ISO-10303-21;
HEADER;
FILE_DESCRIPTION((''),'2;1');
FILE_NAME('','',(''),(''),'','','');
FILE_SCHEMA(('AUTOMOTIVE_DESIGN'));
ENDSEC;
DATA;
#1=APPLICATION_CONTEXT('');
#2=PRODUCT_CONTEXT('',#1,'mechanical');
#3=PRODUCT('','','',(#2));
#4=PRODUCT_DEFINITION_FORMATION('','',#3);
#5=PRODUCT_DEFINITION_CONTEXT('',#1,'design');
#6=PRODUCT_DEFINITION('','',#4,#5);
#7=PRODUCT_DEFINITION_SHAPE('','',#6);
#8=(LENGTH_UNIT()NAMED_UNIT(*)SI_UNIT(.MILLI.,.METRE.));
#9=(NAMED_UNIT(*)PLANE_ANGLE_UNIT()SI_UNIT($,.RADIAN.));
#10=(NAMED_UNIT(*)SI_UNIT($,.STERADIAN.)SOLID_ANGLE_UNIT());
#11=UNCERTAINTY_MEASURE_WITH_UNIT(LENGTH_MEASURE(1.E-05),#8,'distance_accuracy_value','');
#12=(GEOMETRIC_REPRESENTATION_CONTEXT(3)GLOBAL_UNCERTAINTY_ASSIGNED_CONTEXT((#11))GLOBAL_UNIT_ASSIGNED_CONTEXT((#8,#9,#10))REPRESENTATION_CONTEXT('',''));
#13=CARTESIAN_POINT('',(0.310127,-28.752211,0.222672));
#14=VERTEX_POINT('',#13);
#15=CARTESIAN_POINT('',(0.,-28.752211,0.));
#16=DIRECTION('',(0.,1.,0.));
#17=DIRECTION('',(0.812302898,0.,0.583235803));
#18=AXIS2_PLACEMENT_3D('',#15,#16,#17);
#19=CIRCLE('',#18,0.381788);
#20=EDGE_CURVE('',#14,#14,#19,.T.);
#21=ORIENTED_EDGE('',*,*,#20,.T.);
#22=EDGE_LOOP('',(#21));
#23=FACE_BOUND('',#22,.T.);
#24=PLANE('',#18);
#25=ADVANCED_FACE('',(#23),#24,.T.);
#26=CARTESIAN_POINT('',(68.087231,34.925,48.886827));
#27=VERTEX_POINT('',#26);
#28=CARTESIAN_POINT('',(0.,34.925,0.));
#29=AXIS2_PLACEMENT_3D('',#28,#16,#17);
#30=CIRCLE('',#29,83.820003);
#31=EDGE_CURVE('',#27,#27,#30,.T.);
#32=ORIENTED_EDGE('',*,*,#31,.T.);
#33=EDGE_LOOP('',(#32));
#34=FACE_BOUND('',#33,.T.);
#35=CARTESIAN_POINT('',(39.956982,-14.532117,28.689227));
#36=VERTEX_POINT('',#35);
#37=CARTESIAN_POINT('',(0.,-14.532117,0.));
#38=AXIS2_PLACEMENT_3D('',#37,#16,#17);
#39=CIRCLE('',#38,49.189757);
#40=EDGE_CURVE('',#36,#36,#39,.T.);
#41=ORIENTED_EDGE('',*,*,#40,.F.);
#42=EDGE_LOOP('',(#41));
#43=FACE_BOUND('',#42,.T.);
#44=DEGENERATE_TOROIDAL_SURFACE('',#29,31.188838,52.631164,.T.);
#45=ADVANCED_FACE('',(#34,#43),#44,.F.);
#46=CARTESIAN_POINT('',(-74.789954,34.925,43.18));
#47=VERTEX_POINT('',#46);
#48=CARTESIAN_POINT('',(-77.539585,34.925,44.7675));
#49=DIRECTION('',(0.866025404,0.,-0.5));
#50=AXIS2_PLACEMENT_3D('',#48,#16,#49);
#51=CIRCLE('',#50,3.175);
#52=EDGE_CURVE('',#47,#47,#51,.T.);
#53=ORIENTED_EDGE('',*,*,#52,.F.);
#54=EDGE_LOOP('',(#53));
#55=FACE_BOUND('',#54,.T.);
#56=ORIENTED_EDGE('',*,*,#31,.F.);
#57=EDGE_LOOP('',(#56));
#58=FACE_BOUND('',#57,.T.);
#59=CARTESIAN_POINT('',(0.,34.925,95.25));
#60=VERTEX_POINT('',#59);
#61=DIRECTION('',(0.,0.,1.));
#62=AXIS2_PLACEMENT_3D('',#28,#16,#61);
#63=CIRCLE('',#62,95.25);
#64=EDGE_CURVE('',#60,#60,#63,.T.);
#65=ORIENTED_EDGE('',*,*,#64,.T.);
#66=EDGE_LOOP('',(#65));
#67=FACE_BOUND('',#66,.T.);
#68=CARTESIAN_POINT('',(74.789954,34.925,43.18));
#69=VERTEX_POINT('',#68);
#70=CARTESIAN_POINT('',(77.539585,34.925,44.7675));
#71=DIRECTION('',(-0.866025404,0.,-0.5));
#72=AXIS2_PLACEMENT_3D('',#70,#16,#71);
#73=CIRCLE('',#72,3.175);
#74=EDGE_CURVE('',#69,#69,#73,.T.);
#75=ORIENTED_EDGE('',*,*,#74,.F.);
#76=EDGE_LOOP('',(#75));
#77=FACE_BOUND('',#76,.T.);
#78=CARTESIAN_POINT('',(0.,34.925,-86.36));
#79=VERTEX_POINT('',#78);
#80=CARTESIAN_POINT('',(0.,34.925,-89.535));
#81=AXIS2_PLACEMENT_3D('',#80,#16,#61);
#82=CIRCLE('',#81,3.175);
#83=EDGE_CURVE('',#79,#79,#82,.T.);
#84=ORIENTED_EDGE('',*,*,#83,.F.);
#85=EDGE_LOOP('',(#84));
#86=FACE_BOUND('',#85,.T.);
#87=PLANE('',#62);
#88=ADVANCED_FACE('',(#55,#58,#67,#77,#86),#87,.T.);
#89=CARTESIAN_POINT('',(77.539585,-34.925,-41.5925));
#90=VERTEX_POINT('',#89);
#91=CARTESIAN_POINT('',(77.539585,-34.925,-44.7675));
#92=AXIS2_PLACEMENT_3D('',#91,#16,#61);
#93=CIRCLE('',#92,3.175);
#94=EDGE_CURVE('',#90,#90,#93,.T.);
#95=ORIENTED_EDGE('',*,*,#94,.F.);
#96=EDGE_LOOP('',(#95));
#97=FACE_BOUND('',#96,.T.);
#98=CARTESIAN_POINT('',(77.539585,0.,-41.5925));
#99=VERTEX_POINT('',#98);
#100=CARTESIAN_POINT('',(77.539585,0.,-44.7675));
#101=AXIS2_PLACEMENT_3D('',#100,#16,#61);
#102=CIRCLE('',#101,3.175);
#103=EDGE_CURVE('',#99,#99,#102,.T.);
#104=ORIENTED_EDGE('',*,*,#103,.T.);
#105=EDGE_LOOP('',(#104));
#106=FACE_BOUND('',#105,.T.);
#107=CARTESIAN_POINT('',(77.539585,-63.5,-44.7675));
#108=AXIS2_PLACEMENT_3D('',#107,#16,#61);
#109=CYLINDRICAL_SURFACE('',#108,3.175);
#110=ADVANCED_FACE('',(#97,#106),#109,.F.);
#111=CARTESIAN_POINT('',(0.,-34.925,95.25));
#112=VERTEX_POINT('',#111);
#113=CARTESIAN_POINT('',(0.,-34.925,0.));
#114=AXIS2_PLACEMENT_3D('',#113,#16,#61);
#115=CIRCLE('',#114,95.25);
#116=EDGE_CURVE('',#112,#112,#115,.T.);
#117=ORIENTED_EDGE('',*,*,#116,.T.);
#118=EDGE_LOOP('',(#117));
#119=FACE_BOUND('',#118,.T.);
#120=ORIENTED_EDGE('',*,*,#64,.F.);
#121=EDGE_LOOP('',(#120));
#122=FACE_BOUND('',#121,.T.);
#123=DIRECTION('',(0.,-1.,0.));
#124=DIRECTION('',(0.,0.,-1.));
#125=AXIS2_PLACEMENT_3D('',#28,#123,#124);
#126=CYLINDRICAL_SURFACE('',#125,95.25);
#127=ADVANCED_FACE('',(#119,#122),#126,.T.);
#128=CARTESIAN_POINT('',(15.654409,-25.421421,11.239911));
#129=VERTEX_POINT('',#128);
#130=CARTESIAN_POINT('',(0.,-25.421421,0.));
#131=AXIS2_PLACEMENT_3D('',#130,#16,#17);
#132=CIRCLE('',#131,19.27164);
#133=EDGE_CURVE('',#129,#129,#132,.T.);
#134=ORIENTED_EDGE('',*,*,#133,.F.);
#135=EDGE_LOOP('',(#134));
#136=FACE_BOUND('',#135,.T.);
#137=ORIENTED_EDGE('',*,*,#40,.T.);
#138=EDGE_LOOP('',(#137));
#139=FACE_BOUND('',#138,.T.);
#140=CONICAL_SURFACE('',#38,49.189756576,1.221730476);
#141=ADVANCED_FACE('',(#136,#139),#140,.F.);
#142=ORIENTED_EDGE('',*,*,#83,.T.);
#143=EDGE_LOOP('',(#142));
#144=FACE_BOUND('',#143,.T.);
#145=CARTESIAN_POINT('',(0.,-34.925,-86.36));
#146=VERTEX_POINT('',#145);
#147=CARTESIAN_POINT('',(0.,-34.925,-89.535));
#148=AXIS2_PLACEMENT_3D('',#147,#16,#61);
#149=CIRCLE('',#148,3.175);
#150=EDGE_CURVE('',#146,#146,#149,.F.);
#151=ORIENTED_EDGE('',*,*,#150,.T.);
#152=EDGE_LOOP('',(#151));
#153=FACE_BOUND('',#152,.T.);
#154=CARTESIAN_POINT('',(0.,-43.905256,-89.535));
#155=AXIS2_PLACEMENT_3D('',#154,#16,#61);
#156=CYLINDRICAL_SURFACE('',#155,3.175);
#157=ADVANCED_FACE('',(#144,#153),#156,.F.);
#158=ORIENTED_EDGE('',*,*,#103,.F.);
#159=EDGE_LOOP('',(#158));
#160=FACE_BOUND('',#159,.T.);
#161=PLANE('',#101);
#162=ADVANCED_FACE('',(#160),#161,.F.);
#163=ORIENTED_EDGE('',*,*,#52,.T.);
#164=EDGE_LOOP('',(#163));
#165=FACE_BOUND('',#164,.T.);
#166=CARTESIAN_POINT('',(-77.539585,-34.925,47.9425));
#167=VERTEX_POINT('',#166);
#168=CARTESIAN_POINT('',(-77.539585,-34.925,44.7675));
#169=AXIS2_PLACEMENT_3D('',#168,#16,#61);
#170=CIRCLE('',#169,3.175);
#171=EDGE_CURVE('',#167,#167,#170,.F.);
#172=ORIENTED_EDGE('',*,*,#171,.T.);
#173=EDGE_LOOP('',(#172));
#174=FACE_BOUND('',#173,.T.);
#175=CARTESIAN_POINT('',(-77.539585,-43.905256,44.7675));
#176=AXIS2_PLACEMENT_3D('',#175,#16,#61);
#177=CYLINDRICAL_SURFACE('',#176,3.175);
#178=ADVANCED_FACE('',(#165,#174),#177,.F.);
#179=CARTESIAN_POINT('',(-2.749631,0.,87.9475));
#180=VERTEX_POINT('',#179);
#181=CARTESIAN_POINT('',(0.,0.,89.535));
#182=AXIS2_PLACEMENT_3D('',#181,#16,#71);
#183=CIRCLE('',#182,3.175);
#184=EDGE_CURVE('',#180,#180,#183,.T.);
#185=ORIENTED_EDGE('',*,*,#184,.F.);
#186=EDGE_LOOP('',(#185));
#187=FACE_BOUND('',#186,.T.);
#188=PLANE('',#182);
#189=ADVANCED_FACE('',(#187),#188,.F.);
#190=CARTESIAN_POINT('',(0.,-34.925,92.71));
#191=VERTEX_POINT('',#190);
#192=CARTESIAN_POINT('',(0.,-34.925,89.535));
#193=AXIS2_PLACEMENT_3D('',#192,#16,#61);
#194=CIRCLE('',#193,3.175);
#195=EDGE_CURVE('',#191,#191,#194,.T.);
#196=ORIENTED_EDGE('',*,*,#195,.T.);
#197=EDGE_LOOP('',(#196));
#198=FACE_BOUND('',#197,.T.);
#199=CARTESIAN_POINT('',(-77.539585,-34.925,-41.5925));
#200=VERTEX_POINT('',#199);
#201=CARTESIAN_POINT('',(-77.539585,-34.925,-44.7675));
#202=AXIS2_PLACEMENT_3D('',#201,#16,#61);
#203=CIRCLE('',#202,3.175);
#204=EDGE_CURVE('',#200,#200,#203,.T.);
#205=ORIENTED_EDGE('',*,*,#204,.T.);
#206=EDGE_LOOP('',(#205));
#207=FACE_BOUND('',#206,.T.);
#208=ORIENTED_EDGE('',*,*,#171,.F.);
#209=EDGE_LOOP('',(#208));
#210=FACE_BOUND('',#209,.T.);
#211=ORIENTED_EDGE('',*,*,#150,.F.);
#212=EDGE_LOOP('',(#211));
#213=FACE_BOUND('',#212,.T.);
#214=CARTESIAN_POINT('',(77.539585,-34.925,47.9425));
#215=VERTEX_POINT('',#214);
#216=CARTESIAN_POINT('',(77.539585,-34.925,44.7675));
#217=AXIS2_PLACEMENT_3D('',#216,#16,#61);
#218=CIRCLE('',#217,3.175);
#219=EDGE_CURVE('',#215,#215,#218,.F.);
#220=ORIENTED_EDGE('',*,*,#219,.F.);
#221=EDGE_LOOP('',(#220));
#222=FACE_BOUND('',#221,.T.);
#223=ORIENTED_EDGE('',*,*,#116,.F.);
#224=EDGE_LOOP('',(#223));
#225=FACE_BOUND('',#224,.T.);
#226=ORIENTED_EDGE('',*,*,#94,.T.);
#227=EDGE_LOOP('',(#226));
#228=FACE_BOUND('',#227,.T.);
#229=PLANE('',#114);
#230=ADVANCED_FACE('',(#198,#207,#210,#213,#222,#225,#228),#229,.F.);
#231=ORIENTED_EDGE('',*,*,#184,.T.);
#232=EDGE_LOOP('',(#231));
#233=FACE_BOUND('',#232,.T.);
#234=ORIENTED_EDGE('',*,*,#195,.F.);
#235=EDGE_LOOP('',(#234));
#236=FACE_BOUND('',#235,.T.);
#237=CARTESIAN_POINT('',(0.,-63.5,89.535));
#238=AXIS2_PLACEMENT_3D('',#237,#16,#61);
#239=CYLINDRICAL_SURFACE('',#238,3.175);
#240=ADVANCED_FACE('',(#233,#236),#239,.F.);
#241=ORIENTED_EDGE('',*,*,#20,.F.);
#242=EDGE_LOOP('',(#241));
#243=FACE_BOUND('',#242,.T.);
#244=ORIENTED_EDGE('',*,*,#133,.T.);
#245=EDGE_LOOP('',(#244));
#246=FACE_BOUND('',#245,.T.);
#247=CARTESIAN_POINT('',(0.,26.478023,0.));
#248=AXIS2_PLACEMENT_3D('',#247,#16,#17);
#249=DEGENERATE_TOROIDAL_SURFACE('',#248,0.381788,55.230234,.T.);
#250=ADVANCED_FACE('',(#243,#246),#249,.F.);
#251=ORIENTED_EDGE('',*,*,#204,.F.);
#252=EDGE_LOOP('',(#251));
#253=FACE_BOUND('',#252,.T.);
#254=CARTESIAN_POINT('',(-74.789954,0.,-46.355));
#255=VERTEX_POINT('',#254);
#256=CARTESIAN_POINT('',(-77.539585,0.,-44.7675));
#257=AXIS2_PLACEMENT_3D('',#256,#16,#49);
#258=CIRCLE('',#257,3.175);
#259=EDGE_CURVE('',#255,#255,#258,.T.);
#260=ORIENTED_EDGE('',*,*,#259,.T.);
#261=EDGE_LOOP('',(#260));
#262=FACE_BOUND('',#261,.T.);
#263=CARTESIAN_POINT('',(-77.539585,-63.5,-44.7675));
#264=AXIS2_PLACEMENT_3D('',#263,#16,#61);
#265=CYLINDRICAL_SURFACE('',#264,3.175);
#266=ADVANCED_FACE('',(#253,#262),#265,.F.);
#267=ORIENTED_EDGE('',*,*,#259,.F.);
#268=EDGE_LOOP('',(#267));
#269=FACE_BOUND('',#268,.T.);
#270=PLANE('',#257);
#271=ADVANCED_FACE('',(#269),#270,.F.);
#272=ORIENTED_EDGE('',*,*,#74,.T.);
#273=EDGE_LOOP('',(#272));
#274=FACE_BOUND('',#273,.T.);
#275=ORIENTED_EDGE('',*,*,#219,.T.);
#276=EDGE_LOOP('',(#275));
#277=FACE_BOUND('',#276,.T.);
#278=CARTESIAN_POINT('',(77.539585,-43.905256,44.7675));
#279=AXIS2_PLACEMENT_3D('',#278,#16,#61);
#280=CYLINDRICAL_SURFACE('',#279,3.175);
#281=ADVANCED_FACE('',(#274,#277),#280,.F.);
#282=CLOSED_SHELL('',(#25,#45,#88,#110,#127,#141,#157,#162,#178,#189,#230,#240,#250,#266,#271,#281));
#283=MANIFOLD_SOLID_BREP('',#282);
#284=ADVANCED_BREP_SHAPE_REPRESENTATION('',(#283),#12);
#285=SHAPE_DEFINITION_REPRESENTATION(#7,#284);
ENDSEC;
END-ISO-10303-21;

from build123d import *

# Parameters (mm, degrees)
SKETCH1_R           = 95.25
BOSS_EXTRUDE1_DEPTH = 34.925
SKETCH8_R           = 3.175
CUT_EXTRUDE1_DEPTH  = 69.85
CIRPATTERN1_COUNT   = 3
CUT_EXTRUDE2_START  = -34.925
SKETCH12_R          = 3.175
CUT_EXTRUDE2_DEPTH  = 63.5
CIRPATTERN2_COUNT   = 3


# Read off the part's stored shape, not the designer's step: Cavity1
with BuildPart() as part:
    # Sketch1 → Boss-Extrude1 (new, symmetric)
    with BuildSketch(Plane(origin=(0, 0, 0), x_dir=(1, 0, 0), z_dir=(0, 1, 0))):
        with Locations(Location((0, 0, 0), (0, 0, 270))):
            Circle(SKETCH1_R)
    extrude(amount=BOSS_EXTRUDE1_DEPTH, both=True)

    # Cavity1 outline → Cavity1 (revolve, cut)
    with BuildSketch(Plane.XY):
        with BuildLine():
            Line((0, 34.925), (0, -28.752211277))
            Line((0, -28.752211277), (0.381787731, -28.752211277))
            ThreePointArc((0.381787731, -28.752211277), (9.972417265, -27.913139917), (19.271640373, -25.421420595))
            Line((19.271640373, -25.421420595), (49.189756576, -14.532116831))
            ThreePointArc((49.189756576, -14.532116831), (74.301764107, 4.737004269), (83.820002599, 34.925))
            Line((83.820002599, 34.925), (0, 34.925))
        make_face()
    revolve(axis=Axis((0, 0, 0), (0, 1, 0)), mode=Mode.SUBTRACT)

    # Sketch8 → Cut-Extrude1 (cut)
    with BuildSketch(Plane(origin=(0, 34.925, 0), x_dir=(1, 0, 0), z_dir=(0, 1, 0))):
        with Locations(Location((0, 89.535, 0), (0, 0, 270))):
            Circle(SKETCH8_R)
    cut_extrude1 = extrude(amount=-CUT_EXTRUDE1_DEPTH, mode=Mode.SUBTRACT)

    # CirPattern1: Cut-Extrude1 ×3 about axis
    cirpattern1_axis = Axis((0, 0, 0), (0, 1, 0))
    for i in range(1, CIRPATTERN1_COUNT):
        add(cut_extrude1.rotate(cirpattern1_axis, i * 360 / CIRPATTERN1_COUNT), mode=Mode.SUBTRACT)

    # Sketch12 → Cut-Extrude2 (cut)
    with BuildSketch(Plane(origin=(0, 34.925, 0), x_dir=(1, 0, 0), z_dir=(0, 1, 0)).offset(CUT_EXTRUDE2_START)):
        with Locations(Location((77.539584528, 44.7675, 0), (0, 0, 270))):
            Circle(SKETCH12_R)
    cut_extrude2 = extrude(amount=-CUT_EXTRUDE2_DEPTH, mode=Mode.SUBTRACT)

    # CirPattern2: Cut-Extrude2 ×3 about axis
    cirpattern2_axis = Axis((0, 0, 0), (0, 1, 0))
    for i in range(1, CIRPATTERN2_COUNT):
        add(cut_extrude2.rotate(cirpattern2_axis, i * 360 / CIRPATTERN2_COUNT), mode=Mode.SUBTRACT)


solid = part.part
